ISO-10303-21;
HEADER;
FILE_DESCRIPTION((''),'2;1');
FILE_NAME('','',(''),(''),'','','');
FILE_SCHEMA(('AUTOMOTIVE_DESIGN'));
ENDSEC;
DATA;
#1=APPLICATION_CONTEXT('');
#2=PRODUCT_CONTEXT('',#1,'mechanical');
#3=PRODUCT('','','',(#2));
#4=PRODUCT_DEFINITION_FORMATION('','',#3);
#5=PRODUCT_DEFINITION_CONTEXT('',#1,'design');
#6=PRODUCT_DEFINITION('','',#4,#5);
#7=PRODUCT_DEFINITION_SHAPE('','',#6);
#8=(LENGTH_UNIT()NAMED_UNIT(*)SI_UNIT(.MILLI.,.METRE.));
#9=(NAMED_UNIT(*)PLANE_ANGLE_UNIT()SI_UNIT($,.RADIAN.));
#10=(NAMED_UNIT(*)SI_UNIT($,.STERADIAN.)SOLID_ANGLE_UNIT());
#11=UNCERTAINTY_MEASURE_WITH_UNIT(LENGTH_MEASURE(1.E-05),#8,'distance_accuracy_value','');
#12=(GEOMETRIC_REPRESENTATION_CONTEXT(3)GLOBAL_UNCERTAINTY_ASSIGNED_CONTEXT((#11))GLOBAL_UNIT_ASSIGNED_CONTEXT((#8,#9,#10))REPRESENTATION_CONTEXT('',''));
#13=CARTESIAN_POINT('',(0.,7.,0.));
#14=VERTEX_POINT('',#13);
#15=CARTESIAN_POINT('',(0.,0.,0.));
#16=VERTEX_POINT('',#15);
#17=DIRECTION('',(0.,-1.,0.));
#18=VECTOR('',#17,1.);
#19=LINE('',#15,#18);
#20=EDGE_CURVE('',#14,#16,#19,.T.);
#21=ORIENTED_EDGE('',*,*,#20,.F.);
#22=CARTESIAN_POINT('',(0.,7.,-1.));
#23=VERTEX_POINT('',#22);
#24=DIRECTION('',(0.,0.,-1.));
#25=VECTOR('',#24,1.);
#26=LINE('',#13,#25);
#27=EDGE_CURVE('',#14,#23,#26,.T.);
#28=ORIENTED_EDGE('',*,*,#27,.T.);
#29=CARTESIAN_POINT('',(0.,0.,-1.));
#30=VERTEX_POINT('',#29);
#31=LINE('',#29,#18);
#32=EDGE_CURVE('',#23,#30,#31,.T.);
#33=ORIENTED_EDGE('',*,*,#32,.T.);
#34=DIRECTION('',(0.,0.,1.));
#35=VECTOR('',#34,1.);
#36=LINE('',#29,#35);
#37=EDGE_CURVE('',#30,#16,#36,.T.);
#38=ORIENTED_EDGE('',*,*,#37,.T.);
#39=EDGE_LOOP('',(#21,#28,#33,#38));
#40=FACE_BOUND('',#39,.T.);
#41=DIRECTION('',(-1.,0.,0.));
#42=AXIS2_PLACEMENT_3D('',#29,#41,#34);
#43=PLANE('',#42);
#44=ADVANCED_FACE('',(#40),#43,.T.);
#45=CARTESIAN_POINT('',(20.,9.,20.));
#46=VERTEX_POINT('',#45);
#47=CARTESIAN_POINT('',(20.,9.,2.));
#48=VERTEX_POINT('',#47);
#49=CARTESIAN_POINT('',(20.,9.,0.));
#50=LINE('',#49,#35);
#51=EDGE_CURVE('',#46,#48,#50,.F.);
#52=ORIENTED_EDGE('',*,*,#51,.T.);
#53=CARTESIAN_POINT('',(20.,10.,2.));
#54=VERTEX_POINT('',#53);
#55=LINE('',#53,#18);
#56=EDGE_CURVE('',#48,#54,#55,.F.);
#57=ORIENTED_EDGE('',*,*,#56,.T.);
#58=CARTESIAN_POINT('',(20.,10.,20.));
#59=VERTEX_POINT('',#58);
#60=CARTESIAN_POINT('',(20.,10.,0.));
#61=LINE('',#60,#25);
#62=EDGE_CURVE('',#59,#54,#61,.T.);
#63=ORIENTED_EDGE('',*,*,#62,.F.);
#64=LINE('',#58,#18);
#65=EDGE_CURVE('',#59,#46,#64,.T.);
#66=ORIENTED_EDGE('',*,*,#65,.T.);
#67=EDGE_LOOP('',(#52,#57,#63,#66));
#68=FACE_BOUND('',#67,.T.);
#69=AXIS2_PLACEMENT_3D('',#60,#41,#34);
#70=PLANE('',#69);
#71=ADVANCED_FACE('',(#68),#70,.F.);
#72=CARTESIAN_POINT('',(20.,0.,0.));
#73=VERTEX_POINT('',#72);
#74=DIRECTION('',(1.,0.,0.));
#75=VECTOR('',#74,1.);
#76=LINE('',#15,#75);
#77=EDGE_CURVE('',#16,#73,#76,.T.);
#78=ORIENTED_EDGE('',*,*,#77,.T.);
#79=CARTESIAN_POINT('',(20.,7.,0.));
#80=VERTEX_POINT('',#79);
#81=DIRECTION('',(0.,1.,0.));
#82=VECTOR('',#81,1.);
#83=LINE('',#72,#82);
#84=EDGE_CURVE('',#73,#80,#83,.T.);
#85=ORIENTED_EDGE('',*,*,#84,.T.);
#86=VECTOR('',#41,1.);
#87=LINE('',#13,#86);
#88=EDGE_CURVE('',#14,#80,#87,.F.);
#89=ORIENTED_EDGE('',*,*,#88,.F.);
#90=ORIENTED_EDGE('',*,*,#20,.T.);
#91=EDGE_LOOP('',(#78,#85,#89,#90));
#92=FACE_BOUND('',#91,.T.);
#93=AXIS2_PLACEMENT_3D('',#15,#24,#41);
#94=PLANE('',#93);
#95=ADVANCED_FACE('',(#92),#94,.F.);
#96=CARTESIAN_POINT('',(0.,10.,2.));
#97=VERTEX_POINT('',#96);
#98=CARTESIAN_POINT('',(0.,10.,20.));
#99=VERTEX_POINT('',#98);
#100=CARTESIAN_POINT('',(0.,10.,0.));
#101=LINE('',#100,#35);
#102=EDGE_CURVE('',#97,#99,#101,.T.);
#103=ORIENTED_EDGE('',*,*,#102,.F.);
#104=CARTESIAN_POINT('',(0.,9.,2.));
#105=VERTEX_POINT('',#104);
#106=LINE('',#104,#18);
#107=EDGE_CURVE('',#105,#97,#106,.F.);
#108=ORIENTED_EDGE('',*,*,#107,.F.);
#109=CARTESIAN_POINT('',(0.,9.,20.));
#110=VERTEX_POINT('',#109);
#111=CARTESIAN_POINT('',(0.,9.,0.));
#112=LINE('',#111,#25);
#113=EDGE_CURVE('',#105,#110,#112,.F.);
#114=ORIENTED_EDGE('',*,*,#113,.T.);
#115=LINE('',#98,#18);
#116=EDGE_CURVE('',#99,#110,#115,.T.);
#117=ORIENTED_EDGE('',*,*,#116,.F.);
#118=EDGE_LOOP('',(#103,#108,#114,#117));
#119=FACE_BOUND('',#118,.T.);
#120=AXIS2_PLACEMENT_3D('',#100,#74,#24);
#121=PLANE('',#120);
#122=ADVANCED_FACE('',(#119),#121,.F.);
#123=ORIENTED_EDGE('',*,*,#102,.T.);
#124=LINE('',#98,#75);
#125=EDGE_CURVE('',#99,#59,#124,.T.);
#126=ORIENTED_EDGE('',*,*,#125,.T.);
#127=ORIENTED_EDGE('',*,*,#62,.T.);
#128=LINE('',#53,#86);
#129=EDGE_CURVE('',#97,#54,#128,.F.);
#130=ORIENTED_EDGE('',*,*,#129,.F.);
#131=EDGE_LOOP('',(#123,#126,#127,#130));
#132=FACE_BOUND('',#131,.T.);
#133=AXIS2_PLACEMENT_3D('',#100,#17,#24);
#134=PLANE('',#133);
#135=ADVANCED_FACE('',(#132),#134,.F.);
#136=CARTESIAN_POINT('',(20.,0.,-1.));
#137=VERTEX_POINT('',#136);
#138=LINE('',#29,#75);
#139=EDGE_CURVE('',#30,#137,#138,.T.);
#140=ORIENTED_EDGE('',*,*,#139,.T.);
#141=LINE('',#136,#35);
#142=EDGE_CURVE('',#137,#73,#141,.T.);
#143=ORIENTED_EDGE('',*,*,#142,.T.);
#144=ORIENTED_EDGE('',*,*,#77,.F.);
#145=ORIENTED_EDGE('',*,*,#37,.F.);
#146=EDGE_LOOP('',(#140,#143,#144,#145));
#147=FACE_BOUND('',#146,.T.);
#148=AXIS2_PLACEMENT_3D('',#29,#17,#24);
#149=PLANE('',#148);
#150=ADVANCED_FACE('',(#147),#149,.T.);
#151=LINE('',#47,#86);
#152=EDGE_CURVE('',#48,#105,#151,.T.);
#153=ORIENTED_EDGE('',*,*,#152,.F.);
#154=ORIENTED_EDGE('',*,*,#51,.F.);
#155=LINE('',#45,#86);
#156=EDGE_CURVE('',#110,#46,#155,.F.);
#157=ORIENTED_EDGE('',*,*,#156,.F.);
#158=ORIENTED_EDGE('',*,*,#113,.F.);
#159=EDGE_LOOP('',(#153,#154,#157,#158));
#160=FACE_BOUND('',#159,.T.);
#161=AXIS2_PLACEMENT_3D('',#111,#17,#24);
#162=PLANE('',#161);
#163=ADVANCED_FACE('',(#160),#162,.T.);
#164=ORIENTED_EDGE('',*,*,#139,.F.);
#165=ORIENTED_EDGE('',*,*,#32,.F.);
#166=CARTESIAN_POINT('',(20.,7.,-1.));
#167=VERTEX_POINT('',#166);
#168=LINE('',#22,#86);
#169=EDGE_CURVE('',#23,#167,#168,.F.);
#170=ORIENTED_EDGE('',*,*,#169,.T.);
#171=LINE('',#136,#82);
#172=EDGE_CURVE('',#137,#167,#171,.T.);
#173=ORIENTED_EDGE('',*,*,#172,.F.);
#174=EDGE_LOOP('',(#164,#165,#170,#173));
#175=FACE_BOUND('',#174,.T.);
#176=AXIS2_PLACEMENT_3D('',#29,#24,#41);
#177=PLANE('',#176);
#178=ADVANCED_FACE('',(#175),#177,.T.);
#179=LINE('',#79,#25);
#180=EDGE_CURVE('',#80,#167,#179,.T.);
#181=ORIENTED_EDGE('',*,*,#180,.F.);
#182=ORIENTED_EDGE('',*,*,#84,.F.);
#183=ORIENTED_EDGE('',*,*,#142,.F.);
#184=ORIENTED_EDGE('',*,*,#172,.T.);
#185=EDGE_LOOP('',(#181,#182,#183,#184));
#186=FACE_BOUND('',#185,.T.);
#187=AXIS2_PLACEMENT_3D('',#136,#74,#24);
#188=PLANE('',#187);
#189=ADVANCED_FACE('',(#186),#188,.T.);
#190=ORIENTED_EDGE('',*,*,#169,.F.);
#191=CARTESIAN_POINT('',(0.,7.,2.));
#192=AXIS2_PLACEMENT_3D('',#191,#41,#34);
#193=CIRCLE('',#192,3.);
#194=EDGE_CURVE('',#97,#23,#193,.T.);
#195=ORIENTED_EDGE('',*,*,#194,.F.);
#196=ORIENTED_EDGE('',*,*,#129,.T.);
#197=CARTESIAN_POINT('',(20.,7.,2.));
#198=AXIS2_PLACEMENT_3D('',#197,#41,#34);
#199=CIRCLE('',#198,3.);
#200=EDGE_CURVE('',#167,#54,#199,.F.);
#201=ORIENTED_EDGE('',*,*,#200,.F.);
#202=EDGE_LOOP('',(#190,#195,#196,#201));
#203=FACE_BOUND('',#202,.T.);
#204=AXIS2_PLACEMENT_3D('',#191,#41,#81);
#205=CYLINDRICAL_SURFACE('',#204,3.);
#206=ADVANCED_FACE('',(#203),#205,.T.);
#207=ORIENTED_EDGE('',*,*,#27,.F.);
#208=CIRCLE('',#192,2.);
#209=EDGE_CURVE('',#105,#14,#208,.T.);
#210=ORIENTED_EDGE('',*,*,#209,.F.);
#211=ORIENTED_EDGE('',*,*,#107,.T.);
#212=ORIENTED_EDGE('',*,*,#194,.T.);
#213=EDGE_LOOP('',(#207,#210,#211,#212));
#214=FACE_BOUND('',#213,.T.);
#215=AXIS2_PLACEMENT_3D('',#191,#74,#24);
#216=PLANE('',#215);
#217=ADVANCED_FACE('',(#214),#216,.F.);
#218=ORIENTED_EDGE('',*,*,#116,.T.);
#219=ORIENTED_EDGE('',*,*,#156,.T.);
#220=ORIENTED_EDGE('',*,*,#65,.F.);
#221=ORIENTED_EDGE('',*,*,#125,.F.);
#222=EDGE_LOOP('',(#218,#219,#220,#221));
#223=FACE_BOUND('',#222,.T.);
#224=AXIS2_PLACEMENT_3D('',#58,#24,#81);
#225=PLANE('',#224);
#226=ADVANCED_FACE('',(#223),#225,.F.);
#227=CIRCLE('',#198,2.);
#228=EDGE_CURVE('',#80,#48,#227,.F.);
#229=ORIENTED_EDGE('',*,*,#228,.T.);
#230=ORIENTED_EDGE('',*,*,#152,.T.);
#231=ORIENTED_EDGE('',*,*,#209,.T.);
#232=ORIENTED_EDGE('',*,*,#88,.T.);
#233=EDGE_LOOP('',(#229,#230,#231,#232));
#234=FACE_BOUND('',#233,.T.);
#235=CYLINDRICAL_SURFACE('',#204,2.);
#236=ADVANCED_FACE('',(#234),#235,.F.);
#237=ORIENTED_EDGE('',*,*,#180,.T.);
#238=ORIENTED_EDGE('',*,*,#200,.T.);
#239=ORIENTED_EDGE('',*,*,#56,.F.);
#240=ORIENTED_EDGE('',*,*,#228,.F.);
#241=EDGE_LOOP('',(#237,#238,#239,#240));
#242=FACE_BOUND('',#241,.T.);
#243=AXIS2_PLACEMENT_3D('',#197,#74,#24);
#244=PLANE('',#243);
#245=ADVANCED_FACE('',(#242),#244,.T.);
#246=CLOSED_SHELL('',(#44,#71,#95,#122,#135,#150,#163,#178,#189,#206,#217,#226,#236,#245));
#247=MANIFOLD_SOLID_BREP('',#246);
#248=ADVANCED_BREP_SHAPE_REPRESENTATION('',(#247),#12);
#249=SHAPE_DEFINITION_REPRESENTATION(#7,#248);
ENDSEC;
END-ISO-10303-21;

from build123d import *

# Parameters (mm, degrees)
SKETCH_1_W                 = 20
SKETCH_1_H                 = 10
BASEPLATE_DEPTH            = 1
EDGEFLANGE_STRIP_W         = 8
EDGEFLANGE_STRIP_H         = 1
EDGEFLANGE_STRIP_CUT_DEPTH = 20
EDGEFLANGE_DEPTH           = 20
EDGEFLANGE_FLAT_DEPTH      = 1


# Sheet-metal steps are written as plain solids
with BuildPart() as part:
    # Sketch 1 → BasePlate (new body)
    with BuildSketch(Plane.XY):
        with Locations((10, 5)):
            Rectangle(SKETCH_1_W, SKETCH_1_H)
    extrude(amount=-BASEPLATE_DEPTH)

    # EdgeFlange strip (across the edge) → EdgeFlange strip cut (cut)
    with BuildSketch(Plane(origin=(20, 10, 0), x_dir=(0, -1, 0), z_dir=(-1, 0, 0))):
        with Locations((-1, -0.5)):
            Rectangle(EDGEFLANGE_STRIP_W, EDGEFLANGE_STRIP_H)
    extrude(amount=EDGEFLANGE_STRIP_CUT_DEPTH, mode=Mode.SUBTRACT)

    # EdgeFlange bend section (across the edge) → EdgeFlange (add)
    with BuildSketch(Plane(origin=(20, 10, 0), x_dir=(0, -1, 0), z_dir=(-1, 0, 0))):
        with BuildLine():
            Line((0, 2), (1, 2))
            ThreePointArc((1, 2), (1.585786438, 0.585786438), (3, 0))
            Line((3, 0), (3, -1))
            ThreePointArc((3, -1), (0.878679656, -0.121320344), (0, 2))
        make_face()
    extrude(amount=EDGEFLANGE_DEPTH)

    # EdgeFlange profile (on flange) → EdgeFlange flat (add)
    with BuildSketch(Plane(origin=(0, 10, 0), x_dir=(-1, 0, 0), z_dir=(0, 1, 0))):
        Polygon((-20, 20), (-20, 2), (0, 2), (0, 20), (-2, 20), (-18, 20), align=None)
    extrude(amount=-EDGEFLANGE_FLAT_DEPTH)


solid = part.part
